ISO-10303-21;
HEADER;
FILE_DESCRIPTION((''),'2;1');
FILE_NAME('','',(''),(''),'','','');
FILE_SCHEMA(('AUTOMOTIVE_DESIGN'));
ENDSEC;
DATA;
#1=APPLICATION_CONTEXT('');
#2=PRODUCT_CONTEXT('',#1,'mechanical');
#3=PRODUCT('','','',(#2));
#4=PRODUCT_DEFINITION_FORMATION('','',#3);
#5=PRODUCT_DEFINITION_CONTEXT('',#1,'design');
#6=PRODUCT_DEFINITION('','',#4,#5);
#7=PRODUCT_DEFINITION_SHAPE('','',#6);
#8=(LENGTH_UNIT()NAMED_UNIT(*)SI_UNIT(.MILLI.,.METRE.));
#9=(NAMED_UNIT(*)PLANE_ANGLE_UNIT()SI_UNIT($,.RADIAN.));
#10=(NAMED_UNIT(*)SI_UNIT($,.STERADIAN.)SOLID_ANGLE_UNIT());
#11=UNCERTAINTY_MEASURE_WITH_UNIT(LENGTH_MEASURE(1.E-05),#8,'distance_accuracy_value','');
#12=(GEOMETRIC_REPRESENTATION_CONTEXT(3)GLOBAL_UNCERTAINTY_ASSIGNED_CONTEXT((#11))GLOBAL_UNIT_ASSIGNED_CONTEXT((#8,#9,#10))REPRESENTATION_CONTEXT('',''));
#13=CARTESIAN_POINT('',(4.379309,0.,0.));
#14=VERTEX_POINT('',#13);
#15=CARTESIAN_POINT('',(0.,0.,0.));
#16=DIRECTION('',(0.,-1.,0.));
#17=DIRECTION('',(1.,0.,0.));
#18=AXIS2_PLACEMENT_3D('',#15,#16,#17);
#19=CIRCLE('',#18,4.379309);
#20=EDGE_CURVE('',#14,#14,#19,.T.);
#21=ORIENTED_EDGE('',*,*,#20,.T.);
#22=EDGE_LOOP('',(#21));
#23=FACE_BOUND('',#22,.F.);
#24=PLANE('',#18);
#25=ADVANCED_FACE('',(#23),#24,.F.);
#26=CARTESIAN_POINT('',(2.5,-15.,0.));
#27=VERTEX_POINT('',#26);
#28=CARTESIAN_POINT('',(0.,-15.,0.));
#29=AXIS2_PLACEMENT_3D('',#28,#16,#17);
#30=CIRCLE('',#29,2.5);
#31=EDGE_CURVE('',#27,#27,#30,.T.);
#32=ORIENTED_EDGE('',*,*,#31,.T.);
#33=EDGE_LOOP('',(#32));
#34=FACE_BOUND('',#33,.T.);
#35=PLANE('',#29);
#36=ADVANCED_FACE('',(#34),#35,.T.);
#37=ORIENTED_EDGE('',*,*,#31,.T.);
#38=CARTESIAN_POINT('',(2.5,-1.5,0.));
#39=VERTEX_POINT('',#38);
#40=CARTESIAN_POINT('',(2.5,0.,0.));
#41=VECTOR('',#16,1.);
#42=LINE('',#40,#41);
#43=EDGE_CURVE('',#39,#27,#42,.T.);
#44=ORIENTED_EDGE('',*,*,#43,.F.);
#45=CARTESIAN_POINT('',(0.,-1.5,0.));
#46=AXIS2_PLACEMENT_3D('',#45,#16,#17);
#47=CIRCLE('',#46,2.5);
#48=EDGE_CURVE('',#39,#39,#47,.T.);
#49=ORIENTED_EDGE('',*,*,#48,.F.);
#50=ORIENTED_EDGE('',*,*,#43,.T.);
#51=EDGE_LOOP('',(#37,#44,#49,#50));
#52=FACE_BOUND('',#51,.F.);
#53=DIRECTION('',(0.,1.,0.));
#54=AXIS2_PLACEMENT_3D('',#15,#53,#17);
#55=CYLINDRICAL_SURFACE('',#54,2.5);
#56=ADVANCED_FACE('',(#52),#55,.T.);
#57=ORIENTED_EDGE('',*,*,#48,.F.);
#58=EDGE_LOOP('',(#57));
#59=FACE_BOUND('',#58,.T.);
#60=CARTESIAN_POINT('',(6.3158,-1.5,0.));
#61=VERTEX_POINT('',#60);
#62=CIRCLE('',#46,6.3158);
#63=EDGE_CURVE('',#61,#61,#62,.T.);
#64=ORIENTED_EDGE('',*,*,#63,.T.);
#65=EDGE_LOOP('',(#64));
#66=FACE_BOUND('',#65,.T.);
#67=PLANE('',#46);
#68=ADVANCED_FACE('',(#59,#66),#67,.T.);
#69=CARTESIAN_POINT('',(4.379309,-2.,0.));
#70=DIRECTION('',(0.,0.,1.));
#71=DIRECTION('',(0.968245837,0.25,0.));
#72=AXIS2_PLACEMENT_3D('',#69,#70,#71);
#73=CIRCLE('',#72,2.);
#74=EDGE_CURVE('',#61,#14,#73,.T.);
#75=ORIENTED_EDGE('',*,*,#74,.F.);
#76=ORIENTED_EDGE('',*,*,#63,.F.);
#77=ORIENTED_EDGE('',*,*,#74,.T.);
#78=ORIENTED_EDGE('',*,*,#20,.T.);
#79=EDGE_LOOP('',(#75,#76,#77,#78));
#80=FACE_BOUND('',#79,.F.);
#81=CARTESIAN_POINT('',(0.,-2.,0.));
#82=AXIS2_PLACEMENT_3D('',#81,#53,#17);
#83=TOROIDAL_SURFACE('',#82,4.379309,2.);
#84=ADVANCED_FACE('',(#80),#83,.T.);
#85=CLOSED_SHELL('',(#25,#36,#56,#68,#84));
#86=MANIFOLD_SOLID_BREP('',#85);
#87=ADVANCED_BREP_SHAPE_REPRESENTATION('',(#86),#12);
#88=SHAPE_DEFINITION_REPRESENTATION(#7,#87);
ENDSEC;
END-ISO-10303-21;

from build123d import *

# Parameters (mm, degrees)
F0_R     = 2.5
F1_DEPTH = 15
F0_R_2   = 6.3158003242
F2_DEPTH = 1.5


# Not quite as in the source:
# - a fillet or chamfer that OpenCascade refuses, or shapes differently, is made with other operations: its cross-section is extruded or revolved along the edge and cut away or added


with BuildPart() as f1:
    # F0 (on Front) → F1 (new body)
    with BuildSketch(Plane.XZ):
        Circle(F0_R)
    extrude(amount=F1_DEPTH)

    # F0 (on Front) → F2 (join)
    with BuildSketch(Plane.XZ):
        Circle(F0_R_2)
        Circle(F0_R, mode=Mode.SUBTRACT)
    extrude(amount=F2_DEPTH)

    # F3: fillet of radius 2 on 1 edges, made by hand

    # F3_s1 → F3_t2 (revolve, cut)
    with BuildSketch(Plane.XY):
        with BuildLine():
            ThreePointArc((6.3158003242, -1.5), (5.6040535225, -0.4188611699), (4.3793086511, 0))
            Line((4.3793086511, 0), (6.3158003242, 0))
            Line((6.3158003242, 0), (6.3158003242, -1.5))
        make_face()
    revolve(axis=Axis((0, 0, 0), (0, -1, 0)), mode=Mode.SUBTRACT)


solid = f1.part
